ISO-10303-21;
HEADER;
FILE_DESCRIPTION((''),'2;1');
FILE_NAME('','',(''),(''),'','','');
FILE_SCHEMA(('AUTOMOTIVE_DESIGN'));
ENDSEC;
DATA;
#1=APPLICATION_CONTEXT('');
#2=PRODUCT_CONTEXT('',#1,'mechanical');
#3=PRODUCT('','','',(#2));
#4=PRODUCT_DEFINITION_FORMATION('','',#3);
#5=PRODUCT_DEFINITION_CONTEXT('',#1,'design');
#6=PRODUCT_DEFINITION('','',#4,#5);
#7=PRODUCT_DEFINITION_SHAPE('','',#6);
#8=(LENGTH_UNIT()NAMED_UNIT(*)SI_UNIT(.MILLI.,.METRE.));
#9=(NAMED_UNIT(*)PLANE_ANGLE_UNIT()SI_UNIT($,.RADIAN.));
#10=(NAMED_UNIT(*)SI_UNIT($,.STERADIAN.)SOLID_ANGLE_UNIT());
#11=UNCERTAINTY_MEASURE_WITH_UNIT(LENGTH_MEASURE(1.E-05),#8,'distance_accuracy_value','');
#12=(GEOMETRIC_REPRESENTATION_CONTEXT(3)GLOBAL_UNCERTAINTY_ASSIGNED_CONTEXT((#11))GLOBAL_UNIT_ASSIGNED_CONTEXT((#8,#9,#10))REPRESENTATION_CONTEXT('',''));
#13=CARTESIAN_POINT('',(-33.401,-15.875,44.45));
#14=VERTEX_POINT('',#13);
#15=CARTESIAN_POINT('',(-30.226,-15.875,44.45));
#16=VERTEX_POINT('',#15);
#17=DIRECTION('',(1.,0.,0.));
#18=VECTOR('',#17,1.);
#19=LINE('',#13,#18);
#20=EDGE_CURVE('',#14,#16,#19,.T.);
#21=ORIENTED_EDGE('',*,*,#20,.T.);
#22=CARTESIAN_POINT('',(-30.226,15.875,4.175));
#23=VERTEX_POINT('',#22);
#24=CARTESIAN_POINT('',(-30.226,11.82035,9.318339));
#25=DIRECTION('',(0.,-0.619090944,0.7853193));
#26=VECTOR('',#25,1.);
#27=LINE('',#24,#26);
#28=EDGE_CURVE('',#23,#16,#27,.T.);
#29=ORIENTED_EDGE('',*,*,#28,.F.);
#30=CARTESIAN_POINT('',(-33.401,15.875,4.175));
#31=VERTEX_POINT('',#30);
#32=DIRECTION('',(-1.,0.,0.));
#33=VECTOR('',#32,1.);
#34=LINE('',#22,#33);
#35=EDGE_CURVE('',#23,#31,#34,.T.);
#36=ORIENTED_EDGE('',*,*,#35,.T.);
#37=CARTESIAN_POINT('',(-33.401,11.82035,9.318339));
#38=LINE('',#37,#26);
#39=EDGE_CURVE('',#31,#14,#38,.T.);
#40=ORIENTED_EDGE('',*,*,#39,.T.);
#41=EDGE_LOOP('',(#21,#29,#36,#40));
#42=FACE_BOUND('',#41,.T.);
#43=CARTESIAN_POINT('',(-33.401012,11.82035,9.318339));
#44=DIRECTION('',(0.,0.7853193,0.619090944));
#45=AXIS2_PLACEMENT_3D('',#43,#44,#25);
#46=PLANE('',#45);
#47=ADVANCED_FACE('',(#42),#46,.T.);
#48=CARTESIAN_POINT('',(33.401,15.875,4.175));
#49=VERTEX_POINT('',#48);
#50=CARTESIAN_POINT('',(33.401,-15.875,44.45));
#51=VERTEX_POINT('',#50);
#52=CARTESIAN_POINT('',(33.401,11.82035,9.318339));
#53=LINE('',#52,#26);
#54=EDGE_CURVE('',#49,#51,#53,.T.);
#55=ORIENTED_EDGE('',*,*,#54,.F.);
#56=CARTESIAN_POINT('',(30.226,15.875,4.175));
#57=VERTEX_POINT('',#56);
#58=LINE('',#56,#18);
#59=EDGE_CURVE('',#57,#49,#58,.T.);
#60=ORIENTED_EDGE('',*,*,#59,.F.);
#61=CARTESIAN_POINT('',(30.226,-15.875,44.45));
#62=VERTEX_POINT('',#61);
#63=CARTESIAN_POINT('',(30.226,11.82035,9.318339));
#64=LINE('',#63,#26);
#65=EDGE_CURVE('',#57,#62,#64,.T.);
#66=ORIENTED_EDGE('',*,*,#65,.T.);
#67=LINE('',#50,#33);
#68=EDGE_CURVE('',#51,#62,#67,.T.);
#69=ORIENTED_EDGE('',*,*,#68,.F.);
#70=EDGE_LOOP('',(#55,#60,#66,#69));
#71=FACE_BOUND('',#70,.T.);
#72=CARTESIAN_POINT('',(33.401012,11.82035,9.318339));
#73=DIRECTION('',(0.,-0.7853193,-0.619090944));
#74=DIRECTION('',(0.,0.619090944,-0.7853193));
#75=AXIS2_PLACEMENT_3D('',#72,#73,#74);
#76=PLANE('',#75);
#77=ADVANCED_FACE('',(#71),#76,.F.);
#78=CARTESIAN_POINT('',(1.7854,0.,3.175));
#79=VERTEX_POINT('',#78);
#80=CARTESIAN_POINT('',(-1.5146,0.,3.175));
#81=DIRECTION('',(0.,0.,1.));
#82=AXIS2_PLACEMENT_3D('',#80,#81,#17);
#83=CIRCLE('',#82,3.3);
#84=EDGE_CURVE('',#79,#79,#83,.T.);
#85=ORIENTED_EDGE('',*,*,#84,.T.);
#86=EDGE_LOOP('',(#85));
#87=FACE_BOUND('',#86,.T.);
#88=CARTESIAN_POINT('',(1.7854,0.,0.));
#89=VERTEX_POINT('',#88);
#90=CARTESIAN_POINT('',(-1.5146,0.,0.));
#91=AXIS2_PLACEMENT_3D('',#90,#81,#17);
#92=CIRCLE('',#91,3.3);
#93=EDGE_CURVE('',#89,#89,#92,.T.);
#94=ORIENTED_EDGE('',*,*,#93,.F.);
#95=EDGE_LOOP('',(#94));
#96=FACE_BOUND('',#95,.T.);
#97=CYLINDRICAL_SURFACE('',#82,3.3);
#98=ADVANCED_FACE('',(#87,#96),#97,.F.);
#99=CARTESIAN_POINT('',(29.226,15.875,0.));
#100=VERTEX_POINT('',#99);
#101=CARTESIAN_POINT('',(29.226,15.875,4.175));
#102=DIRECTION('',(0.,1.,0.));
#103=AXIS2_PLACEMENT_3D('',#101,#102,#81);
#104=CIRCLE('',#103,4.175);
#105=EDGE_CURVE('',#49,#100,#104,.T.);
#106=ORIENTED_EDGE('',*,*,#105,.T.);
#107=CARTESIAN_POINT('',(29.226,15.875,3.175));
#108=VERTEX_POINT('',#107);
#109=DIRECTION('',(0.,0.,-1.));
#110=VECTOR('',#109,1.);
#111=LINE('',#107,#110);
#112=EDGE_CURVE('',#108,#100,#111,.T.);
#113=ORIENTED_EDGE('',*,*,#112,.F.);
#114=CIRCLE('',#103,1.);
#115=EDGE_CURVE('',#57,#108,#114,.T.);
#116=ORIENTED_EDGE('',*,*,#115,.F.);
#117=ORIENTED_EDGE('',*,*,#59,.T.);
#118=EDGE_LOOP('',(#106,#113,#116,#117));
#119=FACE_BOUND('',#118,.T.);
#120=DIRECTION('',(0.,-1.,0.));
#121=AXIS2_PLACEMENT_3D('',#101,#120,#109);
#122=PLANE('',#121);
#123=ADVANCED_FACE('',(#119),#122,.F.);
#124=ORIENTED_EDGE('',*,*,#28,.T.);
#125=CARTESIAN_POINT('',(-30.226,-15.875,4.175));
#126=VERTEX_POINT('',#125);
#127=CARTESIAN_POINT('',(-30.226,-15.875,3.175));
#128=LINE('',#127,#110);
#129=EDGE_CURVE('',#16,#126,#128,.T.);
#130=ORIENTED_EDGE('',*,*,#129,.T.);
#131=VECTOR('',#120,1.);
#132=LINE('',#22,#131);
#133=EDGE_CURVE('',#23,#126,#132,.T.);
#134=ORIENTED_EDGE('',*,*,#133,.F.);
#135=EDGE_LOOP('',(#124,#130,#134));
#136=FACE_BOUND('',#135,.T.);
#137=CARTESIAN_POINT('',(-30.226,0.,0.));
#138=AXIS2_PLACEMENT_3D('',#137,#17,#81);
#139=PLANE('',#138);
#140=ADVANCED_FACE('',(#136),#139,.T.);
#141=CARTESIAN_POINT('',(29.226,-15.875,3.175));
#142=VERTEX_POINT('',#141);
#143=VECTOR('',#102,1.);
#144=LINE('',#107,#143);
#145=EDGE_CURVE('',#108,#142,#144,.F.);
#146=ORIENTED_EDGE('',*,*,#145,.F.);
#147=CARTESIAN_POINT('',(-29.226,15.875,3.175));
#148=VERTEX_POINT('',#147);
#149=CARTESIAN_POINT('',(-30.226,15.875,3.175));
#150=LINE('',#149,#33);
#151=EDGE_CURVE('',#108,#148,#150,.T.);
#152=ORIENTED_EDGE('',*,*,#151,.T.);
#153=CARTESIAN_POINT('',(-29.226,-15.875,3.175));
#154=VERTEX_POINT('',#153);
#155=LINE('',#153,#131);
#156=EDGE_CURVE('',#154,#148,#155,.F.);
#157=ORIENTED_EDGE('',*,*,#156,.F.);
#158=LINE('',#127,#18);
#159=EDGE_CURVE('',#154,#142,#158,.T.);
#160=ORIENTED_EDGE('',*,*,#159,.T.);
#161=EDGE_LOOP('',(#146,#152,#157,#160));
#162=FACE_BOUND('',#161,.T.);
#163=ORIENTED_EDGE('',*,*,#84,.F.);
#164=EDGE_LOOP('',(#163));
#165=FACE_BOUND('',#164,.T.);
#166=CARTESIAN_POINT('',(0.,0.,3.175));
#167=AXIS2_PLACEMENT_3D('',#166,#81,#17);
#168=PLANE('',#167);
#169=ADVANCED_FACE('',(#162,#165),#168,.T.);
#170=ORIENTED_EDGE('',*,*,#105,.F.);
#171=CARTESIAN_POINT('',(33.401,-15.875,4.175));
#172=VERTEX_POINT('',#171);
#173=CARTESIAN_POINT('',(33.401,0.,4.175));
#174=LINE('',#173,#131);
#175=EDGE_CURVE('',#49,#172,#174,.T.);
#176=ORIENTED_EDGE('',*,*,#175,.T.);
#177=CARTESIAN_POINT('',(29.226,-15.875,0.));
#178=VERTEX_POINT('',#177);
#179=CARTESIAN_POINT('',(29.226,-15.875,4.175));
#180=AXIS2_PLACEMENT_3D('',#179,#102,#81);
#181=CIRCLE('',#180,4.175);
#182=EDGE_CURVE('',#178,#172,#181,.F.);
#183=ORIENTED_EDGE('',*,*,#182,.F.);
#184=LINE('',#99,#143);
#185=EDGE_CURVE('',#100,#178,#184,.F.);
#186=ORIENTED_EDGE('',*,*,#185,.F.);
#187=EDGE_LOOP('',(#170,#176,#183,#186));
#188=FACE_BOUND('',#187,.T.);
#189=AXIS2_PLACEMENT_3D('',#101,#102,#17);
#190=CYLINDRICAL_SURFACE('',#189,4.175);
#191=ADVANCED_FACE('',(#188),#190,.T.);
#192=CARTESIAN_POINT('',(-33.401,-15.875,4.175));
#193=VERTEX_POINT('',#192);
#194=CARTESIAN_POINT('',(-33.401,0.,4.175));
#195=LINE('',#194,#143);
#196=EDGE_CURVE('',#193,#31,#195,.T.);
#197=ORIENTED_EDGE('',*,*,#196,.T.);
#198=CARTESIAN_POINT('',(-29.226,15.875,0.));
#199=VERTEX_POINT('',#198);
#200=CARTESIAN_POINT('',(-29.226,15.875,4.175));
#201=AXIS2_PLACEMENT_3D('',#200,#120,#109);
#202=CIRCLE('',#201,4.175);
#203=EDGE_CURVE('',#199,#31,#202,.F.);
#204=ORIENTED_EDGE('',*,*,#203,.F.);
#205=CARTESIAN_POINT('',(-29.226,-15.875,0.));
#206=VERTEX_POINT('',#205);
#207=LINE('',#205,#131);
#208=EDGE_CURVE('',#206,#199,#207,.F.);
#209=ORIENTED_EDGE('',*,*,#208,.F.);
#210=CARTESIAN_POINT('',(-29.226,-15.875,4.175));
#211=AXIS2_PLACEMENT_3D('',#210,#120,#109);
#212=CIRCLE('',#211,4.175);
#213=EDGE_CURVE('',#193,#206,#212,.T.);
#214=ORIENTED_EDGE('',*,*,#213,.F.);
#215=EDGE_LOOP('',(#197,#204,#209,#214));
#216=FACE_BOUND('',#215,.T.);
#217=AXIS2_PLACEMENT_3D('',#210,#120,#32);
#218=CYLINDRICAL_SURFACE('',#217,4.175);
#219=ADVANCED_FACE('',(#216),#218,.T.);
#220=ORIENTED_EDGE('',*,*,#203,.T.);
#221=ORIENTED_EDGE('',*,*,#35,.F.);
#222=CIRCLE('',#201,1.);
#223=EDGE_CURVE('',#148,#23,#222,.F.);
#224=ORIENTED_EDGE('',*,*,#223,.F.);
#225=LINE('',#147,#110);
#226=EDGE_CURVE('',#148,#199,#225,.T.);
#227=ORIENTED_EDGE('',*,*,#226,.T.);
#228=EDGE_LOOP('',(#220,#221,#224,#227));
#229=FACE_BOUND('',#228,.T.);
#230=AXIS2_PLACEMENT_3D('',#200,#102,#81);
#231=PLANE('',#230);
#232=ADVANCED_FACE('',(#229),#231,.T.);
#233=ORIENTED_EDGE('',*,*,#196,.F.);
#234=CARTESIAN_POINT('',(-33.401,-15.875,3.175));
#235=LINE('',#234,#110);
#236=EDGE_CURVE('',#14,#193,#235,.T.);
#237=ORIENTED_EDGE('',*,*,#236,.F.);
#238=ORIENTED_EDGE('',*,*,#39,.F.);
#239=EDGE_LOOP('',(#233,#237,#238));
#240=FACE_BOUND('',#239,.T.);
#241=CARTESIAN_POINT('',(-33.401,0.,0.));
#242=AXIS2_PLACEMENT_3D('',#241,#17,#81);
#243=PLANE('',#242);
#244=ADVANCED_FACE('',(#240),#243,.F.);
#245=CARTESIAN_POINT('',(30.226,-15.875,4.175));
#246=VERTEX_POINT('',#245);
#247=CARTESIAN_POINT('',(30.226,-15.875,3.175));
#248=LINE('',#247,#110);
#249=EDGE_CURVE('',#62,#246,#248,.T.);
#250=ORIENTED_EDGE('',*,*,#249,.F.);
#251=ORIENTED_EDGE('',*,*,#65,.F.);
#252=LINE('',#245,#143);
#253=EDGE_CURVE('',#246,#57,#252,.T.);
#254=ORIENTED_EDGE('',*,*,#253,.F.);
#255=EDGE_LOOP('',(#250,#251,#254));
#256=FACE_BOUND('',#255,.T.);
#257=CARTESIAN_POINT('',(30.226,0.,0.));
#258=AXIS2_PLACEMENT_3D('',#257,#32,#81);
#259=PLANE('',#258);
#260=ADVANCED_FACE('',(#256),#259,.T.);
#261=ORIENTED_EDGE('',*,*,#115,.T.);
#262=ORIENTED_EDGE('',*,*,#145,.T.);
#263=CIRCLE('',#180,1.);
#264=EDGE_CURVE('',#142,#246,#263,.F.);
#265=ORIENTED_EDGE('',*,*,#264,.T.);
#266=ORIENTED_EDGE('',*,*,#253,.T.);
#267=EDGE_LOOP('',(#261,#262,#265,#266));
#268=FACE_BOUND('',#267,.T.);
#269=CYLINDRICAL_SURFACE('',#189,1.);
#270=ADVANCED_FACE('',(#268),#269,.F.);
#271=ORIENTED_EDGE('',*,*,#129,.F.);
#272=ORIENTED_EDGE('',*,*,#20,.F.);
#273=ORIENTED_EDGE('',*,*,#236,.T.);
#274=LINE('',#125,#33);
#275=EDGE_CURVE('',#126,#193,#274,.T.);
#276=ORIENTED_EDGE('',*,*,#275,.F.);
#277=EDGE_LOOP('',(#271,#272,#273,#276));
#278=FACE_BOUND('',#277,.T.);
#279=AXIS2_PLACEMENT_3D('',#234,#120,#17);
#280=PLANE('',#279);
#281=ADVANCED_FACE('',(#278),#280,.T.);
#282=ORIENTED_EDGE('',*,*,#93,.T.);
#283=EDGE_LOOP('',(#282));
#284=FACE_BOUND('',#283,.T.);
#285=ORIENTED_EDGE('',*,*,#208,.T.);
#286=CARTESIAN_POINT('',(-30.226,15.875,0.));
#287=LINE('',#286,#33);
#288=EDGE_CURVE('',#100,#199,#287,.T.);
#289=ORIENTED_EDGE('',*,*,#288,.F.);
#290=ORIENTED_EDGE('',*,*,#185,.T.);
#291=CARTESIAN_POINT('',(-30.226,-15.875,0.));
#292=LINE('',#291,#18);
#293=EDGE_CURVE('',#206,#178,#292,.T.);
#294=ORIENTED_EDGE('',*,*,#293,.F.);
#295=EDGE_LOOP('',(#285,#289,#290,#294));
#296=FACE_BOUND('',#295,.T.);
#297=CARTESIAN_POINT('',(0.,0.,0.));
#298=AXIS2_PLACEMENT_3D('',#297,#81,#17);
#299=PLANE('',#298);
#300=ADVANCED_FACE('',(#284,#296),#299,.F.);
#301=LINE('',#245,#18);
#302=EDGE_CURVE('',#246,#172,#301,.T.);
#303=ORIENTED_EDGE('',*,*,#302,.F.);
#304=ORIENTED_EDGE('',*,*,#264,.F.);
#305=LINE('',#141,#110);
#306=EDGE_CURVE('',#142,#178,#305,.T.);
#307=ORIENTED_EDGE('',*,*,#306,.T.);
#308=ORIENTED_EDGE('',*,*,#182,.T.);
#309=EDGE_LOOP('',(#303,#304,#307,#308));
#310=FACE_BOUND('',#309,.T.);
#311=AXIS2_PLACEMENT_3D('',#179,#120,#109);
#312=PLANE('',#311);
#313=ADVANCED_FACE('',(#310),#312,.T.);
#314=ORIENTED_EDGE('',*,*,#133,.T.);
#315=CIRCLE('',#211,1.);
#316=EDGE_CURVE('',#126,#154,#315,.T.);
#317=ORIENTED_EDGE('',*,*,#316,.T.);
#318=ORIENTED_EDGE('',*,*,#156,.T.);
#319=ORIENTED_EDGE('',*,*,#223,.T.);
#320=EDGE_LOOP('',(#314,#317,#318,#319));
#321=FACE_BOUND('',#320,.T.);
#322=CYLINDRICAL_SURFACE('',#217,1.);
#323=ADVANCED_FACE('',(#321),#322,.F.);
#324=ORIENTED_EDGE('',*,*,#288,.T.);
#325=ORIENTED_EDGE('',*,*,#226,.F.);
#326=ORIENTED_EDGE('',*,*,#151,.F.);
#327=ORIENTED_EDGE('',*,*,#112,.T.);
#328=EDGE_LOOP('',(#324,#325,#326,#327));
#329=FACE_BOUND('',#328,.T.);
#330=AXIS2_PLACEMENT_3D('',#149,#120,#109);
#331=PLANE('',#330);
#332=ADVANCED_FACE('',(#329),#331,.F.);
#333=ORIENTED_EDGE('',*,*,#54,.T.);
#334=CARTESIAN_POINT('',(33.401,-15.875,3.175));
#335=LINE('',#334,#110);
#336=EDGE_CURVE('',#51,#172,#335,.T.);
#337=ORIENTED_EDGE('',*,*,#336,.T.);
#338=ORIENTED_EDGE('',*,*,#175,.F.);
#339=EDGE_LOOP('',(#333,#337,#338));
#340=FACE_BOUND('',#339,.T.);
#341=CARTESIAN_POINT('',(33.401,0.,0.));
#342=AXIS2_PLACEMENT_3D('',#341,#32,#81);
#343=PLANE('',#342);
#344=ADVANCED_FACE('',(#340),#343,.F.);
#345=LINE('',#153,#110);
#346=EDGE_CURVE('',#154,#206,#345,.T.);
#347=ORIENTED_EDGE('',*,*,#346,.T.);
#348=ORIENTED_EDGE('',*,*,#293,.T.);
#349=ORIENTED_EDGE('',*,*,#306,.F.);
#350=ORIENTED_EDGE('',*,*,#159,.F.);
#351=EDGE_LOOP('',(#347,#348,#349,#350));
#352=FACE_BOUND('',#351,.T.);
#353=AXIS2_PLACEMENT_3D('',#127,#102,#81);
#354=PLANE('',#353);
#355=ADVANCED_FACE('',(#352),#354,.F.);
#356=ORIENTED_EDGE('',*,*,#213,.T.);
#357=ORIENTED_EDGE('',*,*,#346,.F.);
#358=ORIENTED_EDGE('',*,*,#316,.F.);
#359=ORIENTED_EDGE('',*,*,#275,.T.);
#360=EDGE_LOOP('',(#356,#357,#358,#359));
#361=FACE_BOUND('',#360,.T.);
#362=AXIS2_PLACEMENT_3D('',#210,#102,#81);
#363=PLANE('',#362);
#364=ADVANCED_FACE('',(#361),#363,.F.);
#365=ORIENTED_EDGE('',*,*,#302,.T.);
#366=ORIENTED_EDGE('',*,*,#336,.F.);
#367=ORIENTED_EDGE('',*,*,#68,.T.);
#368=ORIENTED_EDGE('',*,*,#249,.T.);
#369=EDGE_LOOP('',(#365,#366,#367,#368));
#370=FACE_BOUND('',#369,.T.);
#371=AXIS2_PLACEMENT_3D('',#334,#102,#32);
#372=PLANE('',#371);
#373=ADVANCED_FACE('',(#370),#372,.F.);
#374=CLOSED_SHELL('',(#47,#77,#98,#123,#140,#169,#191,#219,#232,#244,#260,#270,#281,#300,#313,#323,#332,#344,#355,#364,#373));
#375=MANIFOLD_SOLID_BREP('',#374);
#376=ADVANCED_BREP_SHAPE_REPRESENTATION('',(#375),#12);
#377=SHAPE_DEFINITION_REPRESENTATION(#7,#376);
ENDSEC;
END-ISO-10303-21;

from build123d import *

# Parameters (mm, degrees)
SKETCH2_W                    = 60.452
SKETCH2_H                    = 31.75
BASE_FLANGE1_DEPTH           = 3.175
EDGE_FLANGE1_STRIP_W         = 14.7
EDGE_FLANGE1_STRIP_H         = 3.175
EDGE_FLANGE1_STRIP_CUT_DEPTH = 31.75
EDGE_FLANGE1_DEPTH           = 31.75
CUT_EXTRUDE1_START           = -3.175
CUT_EXTRUDE1_DEPTH           = 83.39755521
M6_CLEARANCE_HOLE1_D         = 6.6


# Sheet-metal steps are written as plain solids
with BuildPart() as part:
    # Sketch2 → Base-Flange1 (new body)
    with BuildSketch(Plane.XY):
        Rectangle(SKETCH2_W, SKETCH2_H)
    extrude(amount=BASE_FLANGE1_DEPTH)

    # Edge-Flange1 strip (across the edge) → Edge-Flange1 strip cut (cut)
    with BuildSketch(Plane(origin=(30.226, -15.875, 3.175), x_dir=(-1, 0, 0), z_dir=(0, 1, 0))):
        with Locations((-6.35, -1.5875)):
            Rectangle(EDGE_FLANGE1_STRIP_W, EDGE_FLANGE1_STRIP_H)
    edge_flange1_strip_cut = extrude(amount=EDGE_FLANGE1_STRIP_CUT_DEPTH, mode=Mode.SUBTRACT)

    # Edge-Flange1 section (across the edge) → Edge-Flange1 (add)
    with BuildSketch(Plane(origin=(30.226, -15.875, 3.175), x_dir=(-1, 0, 0), z_dir=(0, 1, 0))):
        with BuildLine():
            Line((-3.175, 1), (-3.175, 41.275))
            Line((-3.175, 41.275), (0, 41.275))
            Line((0, 41.275), (0, 1))
            ThreePointArc((0, 1), (0.292893219, 0.292893219), (1, 0))
            Line((1, 0), (1, -3.175))
            ThreePointArc((1, -3.175), (-1.952170811, -1.952170811), (-3.175, 1))
        make_face()
    edge_flange1 = extrude(amount=EDGE_FLANGE1_DEPTH)

    # Sketch10 → Cut-Extrude1 (cut)
    with BuildSketch(Plane(origin=(33.401, 0, 0), x_dir=(0, 0, -1), z_dir=(1, 0, 0)).offset(CUT_EXTRUDE1_START)):
        Polygon((-4.175, 15.875), (-44.45, -15.875), (-44.45, 15.875), align=None)
    cut_extrude1 = extrude(amount=CUT_EXTRUDE1_DEPTH, mode=Mode.SUBTRACT)

    # Mirror1: Edge-Flange1 strip cut, Edge-Flange1, Cut-Extrude1 across plane
    add(edge_flange1_strip_cut.mirror(Plane(origin=(0, 0, 0), x_dir=(0, 0, 1), z_dir=(1, 0, 0))), mode=Mode.SUBTRACT)
    add(edge_flange1.mirror(Plane(origin=(0, 0, 0), x_dir=(0, 0, 1), z_dir=(1, 0, 0))))
    add(cut_extrude1.mirror(Plane(origin=(0, 0, 0), x_dir=(0, 0, 1), z_dir=(1, 0, 0))), mode=Mode.SUBTRACT)

    # M6 Clearance Hole1 (through all)
    with Locations(Plane.XY.offset(3.175)):
        with Locations((-1.5146, 0)):
            Hole(M6_CLEARANCE_HOLE1_D / 2)


solid = part.part
